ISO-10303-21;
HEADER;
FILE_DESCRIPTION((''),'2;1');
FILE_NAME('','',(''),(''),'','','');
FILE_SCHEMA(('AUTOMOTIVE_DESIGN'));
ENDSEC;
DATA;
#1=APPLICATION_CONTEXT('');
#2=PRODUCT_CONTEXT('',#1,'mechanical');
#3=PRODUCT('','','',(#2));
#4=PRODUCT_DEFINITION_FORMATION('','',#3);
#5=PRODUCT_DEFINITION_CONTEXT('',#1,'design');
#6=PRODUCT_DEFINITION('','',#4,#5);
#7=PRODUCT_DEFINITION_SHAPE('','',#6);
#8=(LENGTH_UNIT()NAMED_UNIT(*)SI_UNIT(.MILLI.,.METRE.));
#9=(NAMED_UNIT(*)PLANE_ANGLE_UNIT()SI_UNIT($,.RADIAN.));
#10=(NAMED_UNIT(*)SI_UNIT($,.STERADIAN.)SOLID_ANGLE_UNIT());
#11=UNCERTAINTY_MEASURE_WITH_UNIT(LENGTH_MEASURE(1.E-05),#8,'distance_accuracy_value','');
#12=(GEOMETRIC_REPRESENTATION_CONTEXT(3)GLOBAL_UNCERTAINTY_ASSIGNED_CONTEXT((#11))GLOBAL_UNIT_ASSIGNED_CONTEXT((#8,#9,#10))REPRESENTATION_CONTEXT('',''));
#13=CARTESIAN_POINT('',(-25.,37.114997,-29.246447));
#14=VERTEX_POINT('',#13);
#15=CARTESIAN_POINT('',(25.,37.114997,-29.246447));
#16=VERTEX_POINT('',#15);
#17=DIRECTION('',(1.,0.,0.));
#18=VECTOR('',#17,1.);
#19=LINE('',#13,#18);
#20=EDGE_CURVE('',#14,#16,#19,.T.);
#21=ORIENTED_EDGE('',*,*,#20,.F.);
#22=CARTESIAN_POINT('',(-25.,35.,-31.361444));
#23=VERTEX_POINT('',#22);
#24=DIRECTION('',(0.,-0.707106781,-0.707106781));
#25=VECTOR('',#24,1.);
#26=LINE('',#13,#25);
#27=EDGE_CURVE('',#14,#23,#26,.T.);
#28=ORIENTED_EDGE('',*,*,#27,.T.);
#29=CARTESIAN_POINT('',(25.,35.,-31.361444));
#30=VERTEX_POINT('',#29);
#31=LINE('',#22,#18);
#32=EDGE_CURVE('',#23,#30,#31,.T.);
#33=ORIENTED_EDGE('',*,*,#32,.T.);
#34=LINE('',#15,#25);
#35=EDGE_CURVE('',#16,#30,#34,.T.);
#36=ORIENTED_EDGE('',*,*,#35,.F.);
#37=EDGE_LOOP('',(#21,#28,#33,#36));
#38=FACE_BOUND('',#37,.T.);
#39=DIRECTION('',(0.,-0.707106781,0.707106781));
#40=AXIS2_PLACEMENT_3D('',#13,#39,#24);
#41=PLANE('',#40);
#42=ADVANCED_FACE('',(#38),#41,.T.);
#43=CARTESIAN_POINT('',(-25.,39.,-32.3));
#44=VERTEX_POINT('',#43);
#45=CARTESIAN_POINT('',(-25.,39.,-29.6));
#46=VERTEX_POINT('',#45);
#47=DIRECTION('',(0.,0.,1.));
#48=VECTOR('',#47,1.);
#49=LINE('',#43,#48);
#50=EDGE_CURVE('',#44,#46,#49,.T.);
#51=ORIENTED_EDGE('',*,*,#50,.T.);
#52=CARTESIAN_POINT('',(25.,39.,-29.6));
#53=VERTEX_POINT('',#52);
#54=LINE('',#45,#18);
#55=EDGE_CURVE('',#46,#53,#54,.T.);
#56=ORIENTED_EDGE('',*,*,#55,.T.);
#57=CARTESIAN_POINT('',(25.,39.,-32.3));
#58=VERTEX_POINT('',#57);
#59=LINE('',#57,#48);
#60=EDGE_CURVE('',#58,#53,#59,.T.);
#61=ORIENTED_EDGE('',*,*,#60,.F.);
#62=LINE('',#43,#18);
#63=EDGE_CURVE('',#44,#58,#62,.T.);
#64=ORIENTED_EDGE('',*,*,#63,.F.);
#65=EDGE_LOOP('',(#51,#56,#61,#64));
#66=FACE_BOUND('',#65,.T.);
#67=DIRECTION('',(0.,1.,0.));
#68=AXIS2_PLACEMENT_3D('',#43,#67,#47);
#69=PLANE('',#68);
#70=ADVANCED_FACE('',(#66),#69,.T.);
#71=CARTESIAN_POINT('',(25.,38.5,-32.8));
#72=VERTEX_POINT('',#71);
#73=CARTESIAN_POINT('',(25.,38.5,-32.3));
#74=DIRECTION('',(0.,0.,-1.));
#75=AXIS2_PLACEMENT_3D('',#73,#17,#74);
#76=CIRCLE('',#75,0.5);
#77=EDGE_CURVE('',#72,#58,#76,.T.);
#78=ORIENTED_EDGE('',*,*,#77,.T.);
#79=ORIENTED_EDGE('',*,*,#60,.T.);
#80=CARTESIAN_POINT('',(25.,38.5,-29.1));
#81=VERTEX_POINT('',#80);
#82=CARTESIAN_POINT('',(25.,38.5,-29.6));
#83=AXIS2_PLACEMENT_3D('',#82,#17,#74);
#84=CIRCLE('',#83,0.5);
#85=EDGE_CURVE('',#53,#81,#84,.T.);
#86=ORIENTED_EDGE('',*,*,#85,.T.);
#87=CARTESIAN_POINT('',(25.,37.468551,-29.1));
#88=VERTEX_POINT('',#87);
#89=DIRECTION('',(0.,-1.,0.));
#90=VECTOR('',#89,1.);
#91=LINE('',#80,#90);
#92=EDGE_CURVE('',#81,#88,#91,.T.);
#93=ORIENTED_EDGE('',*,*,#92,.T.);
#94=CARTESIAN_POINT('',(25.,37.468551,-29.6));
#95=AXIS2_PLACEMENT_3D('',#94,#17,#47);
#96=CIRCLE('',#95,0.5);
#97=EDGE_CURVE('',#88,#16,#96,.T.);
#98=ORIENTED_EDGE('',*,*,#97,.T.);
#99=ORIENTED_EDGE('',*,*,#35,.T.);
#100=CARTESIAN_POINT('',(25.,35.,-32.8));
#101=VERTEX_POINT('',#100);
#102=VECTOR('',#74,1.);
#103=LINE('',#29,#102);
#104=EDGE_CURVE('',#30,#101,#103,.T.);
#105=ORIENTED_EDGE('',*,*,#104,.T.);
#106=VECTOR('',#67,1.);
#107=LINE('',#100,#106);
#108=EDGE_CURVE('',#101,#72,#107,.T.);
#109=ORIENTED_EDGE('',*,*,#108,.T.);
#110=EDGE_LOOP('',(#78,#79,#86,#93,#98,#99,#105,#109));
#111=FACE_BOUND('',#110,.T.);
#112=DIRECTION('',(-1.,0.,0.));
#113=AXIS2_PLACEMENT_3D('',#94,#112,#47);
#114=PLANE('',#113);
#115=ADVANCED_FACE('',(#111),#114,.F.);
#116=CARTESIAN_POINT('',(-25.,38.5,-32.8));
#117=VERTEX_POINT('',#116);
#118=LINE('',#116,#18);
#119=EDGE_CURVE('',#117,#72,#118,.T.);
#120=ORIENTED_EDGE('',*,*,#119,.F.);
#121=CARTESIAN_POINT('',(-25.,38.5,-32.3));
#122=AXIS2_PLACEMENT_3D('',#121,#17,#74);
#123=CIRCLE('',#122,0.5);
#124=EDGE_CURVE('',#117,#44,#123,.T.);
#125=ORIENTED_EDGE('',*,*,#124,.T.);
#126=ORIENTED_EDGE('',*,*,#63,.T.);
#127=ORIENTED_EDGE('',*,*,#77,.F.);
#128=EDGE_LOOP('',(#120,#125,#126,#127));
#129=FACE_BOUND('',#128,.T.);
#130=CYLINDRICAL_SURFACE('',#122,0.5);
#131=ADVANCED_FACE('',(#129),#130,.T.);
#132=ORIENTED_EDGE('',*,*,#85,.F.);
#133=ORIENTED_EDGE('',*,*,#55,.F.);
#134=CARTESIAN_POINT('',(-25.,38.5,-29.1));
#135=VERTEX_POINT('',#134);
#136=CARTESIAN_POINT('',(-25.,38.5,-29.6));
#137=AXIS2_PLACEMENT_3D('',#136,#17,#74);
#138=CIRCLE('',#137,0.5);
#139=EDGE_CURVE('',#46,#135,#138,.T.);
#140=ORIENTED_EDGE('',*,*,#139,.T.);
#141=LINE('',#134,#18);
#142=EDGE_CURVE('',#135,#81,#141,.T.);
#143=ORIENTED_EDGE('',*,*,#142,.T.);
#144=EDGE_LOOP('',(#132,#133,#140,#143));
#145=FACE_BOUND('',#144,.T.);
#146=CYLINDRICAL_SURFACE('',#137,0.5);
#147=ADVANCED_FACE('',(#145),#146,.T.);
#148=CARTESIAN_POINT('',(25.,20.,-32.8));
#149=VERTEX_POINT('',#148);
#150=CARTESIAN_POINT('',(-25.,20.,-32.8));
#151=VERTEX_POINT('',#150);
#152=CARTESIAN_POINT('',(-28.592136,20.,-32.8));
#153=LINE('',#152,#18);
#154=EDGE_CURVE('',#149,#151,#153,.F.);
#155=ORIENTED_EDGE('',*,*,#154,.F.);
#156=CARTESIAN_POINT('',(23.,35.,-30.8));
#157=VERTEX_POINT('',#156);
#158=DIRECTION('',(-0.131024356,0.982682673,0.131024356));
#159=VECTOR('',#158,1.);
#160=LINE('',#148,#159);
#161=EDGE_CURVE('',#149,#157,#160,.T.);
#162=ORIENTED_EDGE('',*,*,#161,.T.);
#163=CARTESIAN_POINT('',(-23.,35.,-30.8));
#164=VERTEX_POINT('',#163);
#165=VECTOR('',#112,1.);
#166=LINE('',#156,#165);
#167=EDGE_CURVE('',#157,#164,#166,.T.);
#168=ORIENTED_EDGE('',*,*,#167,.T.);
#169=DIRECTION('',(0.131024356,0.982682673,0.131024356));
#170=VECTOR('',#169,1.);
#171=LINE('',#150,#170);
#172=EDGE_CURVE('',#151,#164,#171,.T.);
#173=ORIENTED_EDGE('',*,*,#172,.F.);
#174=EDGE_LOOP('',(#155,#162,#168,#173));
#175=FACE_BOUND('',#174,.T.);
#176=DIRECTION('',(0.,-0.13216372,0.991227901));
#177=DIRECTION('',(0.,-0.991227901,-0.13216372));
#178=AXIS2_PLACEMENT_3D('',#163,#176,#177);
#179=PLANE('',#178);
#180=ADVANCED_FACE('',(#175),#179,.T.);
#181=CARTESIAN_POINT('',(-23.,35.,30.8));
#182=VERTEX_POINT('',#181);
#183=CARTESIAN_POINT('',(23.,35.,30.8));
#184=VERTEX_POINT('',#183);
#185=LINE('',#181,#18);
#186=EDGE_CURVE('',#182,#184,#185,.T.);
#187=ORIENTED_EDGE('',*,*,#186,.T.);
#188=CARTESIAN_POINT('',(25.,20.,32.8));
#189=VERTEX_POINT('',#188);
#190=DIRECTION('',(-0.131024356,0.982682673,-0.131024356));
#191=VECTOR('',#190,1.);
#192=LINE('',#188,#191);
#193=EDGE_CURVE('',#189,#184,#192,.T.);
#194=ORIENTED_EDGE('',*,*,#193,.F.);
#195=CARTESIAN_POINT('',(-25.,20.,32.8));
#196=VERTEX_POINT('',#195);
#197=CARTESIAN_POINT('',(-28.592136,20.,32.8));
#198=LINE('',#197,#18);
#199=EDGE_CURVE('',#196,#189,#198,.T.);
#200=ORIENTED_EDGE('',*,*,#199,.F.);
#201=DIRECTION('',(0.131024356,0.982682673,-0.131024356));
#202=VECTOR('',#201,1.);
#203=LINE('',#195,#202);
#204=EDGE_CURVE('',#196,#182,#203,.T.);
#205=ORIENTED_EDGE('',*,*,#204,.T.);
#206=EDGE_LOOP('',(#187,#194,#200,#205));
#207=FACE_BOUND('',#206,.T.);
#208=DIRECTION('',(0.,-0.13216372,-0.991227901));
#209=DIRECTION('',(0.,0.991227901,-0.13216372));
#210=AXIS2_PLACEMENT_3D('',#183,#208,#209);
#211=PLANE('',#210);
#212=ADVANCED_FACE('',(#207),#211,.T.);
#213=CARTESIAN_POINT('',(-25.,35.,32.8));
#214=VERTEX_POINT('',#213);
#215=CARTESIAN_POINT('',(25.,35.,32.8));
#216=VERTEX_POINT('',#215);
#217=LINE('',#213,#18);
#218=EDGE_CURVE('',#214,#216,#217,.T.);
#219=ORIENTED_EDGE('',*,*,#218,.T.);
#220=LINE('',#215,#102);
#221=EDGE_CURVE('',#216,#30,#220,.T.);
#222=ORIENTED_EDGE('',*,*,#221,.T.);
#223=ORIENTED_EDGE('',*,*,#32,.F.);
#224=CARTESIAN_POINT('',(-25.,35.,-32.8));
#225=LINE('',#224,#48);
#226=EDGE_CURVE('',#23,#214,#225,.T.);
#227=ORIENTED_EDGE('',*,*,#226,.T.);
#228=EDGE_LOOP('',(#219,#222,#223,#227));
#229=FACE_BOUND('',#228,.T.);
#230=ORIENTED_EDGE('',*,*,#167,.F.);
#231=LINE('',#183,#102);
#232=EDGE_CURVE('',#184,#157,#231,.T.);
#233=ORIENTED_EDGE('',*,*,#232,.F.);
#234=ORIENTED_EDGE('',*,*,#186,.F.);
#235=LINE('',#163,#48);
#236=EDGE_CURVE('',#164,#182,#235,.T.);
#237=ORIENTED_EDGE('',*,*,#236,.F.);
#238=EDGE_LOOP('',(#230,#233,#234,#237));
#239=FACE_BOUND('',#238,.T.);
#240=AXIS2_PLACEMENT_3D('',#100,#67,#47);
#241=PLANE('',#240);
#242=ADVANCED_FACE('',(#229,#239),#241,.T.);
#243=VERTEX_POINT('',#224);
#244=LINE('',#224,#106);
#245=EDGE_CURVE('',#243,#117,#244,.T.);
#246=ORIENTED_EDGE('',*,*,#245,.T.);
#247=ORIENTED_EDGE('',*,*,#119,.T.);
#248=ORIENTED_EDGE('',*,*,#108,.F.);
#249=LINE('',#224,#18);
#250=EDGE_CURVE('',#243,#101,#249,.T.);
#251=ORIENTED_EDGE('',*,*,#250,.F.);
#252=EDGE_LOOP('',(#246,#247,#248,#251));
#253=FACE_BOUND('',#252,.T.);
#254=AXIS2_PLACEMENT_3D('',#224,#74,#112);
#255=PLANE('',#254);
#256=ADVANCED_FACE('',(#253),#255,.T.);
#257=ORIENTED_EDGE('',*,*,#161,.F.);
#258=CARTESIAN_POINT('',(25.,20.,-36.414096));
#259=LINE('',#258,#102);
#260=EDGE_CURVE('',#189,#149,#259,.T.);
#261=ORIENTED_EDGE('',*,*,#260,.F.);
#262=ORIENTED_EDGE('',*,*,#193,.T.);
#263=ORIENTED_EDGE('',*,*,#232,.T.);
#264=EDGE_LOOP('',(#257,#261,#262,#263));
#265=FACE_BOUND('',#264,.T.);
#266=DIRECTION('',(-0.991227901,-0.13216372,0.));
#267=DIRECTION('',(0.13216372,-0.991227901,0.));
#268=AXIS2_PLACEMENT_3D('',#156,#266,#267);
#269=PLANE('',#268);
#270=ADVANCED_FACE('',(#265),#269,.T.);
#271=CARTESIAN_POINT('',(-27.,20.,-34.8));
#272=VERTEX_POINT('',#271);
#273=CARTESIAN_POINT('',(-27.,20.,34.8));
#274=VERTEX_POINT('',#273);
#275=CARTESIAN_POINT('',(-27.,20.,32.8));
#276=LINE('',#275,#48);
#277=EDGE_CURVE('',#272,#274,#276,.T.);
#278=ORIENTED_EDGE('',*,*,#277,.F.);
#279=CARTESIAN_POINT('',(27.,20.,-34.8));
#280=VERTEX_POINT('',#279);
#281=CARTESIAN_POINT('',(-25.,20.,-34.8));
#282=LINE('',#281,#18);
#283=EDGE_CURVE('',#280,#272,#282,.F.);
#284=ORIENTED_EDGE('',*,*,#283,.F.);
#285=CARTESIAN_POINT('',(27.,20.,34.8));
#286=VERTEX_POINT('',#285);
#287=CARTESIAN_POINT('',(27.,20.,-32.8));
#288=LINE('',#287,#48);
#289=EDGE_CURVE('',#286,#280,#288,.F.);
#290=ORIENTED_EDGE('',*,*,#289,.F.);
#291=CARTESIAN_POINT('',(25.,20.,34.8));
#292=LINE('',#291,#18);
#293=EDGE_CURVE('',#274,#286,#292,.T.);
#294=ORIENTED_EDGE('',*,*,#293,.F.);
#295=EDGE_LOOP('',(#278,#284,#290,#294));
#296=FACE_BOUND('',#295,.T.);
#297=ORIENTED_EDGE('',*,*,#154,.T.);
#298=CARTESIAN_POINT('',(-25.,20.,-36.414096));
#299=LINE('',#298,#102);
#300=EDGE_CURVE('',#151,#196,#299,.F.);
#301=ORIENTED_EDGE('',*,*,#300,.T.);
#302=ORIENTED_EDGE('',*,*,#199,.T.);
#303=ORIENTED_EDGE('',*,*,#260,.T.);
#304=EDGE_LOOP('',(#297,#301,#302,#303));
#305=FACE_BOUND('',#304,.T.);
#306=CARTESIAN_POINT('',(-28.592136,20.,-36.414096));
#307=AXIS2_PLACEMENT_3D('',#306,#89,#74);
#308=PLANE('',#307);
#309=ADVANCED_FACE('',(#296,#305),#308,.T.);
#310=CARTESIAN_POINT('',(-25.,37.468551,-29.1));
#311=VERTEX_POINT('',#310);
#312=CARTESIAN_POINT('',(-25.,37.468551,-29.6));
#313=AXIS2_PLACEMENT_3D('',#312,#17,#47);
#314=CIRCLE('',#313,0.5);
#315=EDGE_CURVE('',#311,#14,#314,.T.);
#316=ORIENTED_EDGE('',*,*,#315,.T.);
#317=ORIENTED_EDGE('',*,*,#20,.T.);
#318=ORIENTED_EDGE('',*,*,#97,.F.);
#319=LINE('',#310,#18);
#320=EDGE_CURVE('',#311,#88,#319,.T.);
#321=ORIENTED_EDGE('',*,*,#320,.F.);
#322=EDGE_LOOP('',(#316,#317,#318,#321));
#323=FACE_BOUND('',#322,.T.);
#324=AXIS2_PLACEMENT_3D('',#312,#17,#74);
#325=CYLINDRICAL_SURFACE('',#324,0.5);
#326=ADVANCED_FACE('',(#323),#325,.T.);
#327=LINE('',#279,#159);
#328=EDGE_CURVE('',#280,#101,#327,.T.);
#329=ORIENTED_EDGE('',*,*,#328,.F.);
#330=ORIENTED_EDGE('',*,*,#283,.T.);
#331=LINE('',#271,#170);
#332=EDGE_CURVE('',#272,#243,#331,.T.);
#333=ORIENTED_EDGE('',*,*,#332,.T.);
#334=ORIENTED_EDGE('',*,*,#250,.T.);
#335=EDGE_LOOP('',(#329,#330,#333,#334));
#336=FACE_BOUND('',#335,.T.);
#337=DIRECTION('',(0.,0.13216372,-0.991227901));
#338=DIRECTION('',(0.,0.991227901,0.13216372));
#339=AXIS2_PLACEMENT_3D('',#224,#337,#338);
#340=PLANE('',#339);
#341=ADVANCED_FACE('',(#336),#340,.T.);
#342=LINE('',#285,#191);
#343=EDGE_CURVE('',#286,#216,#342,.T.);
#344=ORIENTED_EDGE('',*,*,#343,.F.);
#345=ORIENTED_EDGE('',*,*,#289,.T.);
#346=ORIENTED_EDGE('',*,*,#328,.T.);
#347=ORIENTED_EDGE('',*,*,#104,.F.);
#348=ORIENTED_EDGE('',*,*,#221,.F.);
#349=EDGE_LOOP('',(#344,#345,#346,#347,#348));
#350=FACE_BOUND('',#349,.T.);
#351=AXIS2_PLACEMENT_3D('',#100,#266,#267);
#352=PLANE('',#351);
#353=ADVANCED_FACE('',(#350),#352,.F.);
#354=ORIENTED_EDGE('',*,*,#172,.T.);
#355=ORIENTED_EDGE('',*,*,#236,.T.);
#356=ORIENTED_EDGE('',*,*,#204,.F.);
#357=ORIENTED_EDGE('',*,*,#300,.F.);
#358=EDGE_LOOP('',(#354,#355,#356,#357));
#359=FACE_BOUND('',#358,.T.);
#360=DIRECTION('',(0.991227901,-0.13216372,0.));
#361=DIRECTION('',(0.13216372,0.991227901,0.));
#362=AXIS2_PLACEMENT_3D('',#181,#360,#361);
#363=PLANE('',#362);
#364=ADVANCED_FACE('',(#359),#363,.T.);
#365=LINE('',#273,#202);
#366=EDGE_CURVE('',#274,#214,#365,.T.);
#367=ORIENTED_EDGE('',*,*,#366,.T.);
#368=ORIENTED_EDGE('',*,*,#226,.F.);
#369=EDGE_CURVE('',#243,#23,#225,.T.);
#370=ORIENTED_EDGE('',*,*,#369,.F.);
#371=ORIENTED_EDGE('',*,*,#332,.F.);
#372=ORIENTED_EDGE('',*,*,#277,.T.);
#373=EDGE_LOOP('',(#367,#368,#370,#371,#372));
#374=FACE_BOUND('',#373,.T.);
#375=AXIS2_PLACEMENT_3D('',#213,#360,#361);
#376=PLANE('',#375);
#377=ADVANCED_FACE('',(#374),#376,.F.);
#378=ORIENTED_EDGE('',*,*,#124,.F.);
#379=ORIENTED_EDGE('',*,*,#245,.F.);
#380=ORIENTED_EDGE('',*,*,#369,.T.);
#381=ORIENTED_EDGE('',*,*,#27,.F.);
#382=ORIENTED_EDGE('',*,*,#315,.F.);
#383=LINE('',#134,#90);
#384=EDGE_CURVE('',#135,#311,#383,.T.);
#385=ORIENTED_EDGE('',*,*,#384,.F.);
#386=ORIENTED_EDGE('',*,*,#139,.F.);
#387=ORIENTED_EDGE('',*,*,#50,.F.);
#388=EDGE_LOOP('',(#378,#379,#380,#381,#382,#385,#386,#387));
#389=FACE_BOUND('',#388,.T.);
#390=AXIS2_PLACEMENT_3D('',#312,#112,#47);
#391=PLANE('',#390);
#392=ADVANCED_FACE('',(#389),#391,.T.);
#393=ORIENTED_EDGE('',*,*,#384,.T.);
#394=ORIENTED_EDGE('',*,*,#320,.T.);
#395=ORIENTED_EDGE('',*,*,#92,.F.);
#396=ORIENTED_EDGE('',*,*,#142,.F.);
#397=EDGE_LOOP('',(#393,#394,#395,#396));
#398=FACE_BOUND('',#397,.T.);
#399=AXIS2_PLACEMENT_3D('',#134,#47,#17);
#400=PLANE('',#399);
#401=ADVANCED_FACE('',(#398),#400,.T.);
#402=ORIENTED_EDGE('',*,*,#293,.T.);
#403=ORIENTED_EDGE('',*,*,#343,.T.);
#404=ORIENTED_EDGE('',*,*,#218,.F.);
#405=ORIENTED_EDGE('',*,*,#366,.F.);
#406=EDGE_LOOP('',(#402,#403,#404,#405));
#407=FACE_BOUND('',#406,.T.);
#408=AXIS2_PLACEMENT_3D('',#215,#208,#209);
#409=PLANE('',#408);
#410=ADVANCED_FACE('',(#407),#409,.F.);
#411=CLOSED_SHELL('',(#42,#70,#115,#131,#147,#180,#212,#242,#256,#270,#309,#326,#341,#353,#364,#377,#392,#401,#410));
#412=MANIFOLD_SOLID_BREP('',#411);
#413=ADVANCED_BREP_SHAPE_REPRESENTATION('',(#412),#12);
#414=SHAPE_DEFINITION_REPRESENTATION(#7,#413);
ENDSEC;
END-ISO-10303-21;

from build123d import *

# Parameters (mm, degrees)
BOSS_EXTRUDE1_DEPTH = 20
LOFT1_START         = -34.8
LOFT1_DEPTH         = 69.6
LOFT1_START_2       = -28
LOFT1_2_DEPTH       = 56
BOSS_EXTRUDE2_START = -2
BOSS_EXTRUDE2_DEPTH = 50
BOSS_EXTRUDE3_DEPTH = 2.3
BOSS_EXTRUDE4_DEPTH = 2.3
CUT_EXTRUDE1_START  = -69.6
SKETCH7_R           = 5.3
CUT_EXTRUDE1_DEPTH  = 2
CUT_EXTRUDE2_DEPTH  = 70
SKETCH9_W           = 56.388818991
SKETCH9_H           = 73.181727467
BOSS_EXTRUDE5_DEPTH = 48


with BuildPart() as part:
    # Sketch1 → Boss-Extrude1 (new body)
    with BuildSketch(Plane(origin=(0, 0, 0), x_dir=(1, 0, 0), z_dir=(0, 1, 0))):
        Polygon((27, 34.8), (-27, 34.8), (-27, 0), (-27, -34.8), (27, -34.8), (27, 0), align=None)
        Polygon((25, 0), (25, 32.8), (-25, 32.8), (-25, 0), (-25, -32.8), (25, -32.8), align=None, mode=Mode.SUBTRACT)
    extrude(amount=BOSS_EXTRUDE1_DEPTH)

    # Loft1: read off the stored shape, not the designer's step
    # Loft1 outline → Loft1 (add)
    with BuildSketch(Plane.XY.offset(LOFT1_START)):
        Polygon((-27, 20), (27, 20), (25, 35), (-25, 35), align=None)
    extrude(amount=LOFT1_DEPTH)

    # Loft1 2 outline → Loft1 2 (cut)
    with BuildSketch(Plane.YZ.offset(LOFT1_START_2)):
        Polygon((20, 34.8), (35, 32.8), (35, 34.8), align=None)
        Polygon((35, -32.8), (20, -34.8), (35, -34.8), align=None)
    extrude(amount=LOFT1_2_DEPTH, mode=Mode.SUBTRACT)

    # Cut-Loft1: read off the stored shape, not the designer's step
    # Cut-Loft1: loft between two sections, ruled curve by curve
    cut_loft1_from = [
        Edge.make_line((-25, 20, 32.8), (-25, 20, -32.8)),
        Edge.make_line((-25, 20, -32.8), (25, 20, -32.8)),
        Edge.make_line((25, 20, 32.8), (-25, 20, 32.8)),
        Edge.make_line((25, 20, -32.8), (25, 20, 32.8)),
    ]
    cut_loft1_to = [
        Edge.make_line((-23, 35, 30.8), (-23, 35, -30.8)),
        Edge.make_line((-23, 35, -30.8), (23, 35, -30.8)),
        Edge.make_line((23, 35, 30.8), (-23, 35, 30.8)),
        Edge.make_line((23, 35, -30.8), (23, 35, 30.8)),
    ]
    cut_loft1 = Solid(Shell([*[Face.make_surface_from_curves(cut_loft1_from[k], cut_loft1_to[k]) for k in range(4)], Face(Wire(cut_loft1_from)), Face(Wire(cut_loft1_to))]))
    add(cut_loft1, mode=Mode.SUBTRACT)

    # Sketch2 → Boss-Extrude2 (add)
    with BuildSketch(Plane(origin=(27, 0, 0), x_dir=(0, 0, -1), z_dir=(1, 0, 0)).offset(BOSS_EXTRUDE2_START)):
        with BuildLine():
            Line((32.8, 35), (32.8, 38.5))
            ThreePointArc((32.8, 38.5), (32.653553391, 38.853553391), (32.3, 39))
            Line((32.3, 39), (29.6, 39))
            ThreePointArc((29.6, 39), (29.246446609, 38.853553391), (29.1, 38.5))
            Line((29.1, 38.5), (29.1, 37.468550682))
            ThreePointArc((29.1, 37.468550682), (29.138060234, 37.277208966), (29.246446609, 37.114997291))
            Line((29.246446609, 37.114997291), (31.361443901, 35))
            Line((31.361443901, 35), (32.8, 35))
        make_face()
    extrude(amount=-BOSS_EXTRUDE2_DEPTH)

    # Sketch7 → Cut-Extrude1 (cut)
    with BuildSketch(Plane.XY.offset(34.8).offset(CUT_EXTRUDE1_START)):
        with Locations((0, 10)):
            Circle(SKETCH7_R)
    extrude(amount=CUT_EXTRUDE1_DEPTH, mode=Mode.SUBTRACT)

    # Sketch8 → Cut-Extrude2 (cut)
    with BuildSketch(Plane.ZY.offset(27)):
        with BuildLine():
            Line((-25.8, 6), (-22.8, 6))
            ThreePointArc((-22.8, 6), (-21.8, 4), (-22.8, 2))
            Line((-22.8, 2), (-25.8, 2))
            ThreePointArc((-25.8, 2), (-26.8, 4), (-25.8, 6))
        make_face()
        with BuildLine():
            Line((22.8, 6), (25.8, 6))
            ThreePointArc((25.8, 6), (26.8, 4), (25.8, 2))
            Line((25.8, 2), (22.8, 2))
            ThreePointArc((22.8, 2), (21.8, 4), (22.8, 6))
        make_face()
    extrude(amount=-CUT_EXTRUDE2_DEPTH, mode=Mode.SUBTRACT)


with BuildPart() as body_2:
    # Sketch5 → Boss-Extrude3 (new body)
    with BuildSketch(Plane.XZ):
        with BuildLine():
            Line((-25, -34.8), (-25, -9.8))
            ThreePointArc((-25, -9.8), (0, 15.2), (25, -9.8))
            Line((25, -9.8), (25, -34.8))
            Line((25, -34.8), (27, -34.8))
            Line((27, -34.8), (27, 34.8))
            Line((27, 34.8), (-27, 34.8))
            Line((-27, 34.8), (-27, -34.8))
            Line((-27, -34.8), (-25, -34.8))
        make_face()
    extrude(amount=BOSS_EXTRUDE3_DEPTH)

    # Sketch6 → Boss-Extrude4 (add)
    with BuildSketch(Plane.XZ.offset(2.3)):
        with BuildLine():
            Line((22.7, -34.8), (27, -34.8))
            Line((27, -34.8), (27, 34.8))
            Line((27, 34.8), (-27, 34.8))
            Line((-27, 34.8), (-27, -34.8))
            Line((-27, -34.8), (-22.7, -34.8))
            Line((-22.7, -34.8), (-22.7, -9.8))
            ThreePointArc((-22.7, -9.8), (0, 12.9), (22.7, -9.8))
            Line((22.7, -9.8), (22.7, -34.8))
        make_face()
    extrude(amount=BOSS_EXTRUDE4_DEPTH)


with BuildPart() as body_2_2:
    # Sketch9 → Boss-Extrude5 (new body)
    with BuildSketch(Plane(origin=(0, 20, 0), x_dir=(-1, 0, 0), z_dir=(0, 1, 0))):
        with Locations((0.397726779, 0.176767457)):
            Rectangle(SKETCH9_W, SKETCH9_H)
    extrude(amount=-BOSS_EXTRUDE5_DEPTH)


with BuildPart() as part_1:
    add(part.part)

    # Combine1: cut body 2 2
    add(body_2_2.part, mode=Mode.SUBTRACT)


solid = part_1.part
